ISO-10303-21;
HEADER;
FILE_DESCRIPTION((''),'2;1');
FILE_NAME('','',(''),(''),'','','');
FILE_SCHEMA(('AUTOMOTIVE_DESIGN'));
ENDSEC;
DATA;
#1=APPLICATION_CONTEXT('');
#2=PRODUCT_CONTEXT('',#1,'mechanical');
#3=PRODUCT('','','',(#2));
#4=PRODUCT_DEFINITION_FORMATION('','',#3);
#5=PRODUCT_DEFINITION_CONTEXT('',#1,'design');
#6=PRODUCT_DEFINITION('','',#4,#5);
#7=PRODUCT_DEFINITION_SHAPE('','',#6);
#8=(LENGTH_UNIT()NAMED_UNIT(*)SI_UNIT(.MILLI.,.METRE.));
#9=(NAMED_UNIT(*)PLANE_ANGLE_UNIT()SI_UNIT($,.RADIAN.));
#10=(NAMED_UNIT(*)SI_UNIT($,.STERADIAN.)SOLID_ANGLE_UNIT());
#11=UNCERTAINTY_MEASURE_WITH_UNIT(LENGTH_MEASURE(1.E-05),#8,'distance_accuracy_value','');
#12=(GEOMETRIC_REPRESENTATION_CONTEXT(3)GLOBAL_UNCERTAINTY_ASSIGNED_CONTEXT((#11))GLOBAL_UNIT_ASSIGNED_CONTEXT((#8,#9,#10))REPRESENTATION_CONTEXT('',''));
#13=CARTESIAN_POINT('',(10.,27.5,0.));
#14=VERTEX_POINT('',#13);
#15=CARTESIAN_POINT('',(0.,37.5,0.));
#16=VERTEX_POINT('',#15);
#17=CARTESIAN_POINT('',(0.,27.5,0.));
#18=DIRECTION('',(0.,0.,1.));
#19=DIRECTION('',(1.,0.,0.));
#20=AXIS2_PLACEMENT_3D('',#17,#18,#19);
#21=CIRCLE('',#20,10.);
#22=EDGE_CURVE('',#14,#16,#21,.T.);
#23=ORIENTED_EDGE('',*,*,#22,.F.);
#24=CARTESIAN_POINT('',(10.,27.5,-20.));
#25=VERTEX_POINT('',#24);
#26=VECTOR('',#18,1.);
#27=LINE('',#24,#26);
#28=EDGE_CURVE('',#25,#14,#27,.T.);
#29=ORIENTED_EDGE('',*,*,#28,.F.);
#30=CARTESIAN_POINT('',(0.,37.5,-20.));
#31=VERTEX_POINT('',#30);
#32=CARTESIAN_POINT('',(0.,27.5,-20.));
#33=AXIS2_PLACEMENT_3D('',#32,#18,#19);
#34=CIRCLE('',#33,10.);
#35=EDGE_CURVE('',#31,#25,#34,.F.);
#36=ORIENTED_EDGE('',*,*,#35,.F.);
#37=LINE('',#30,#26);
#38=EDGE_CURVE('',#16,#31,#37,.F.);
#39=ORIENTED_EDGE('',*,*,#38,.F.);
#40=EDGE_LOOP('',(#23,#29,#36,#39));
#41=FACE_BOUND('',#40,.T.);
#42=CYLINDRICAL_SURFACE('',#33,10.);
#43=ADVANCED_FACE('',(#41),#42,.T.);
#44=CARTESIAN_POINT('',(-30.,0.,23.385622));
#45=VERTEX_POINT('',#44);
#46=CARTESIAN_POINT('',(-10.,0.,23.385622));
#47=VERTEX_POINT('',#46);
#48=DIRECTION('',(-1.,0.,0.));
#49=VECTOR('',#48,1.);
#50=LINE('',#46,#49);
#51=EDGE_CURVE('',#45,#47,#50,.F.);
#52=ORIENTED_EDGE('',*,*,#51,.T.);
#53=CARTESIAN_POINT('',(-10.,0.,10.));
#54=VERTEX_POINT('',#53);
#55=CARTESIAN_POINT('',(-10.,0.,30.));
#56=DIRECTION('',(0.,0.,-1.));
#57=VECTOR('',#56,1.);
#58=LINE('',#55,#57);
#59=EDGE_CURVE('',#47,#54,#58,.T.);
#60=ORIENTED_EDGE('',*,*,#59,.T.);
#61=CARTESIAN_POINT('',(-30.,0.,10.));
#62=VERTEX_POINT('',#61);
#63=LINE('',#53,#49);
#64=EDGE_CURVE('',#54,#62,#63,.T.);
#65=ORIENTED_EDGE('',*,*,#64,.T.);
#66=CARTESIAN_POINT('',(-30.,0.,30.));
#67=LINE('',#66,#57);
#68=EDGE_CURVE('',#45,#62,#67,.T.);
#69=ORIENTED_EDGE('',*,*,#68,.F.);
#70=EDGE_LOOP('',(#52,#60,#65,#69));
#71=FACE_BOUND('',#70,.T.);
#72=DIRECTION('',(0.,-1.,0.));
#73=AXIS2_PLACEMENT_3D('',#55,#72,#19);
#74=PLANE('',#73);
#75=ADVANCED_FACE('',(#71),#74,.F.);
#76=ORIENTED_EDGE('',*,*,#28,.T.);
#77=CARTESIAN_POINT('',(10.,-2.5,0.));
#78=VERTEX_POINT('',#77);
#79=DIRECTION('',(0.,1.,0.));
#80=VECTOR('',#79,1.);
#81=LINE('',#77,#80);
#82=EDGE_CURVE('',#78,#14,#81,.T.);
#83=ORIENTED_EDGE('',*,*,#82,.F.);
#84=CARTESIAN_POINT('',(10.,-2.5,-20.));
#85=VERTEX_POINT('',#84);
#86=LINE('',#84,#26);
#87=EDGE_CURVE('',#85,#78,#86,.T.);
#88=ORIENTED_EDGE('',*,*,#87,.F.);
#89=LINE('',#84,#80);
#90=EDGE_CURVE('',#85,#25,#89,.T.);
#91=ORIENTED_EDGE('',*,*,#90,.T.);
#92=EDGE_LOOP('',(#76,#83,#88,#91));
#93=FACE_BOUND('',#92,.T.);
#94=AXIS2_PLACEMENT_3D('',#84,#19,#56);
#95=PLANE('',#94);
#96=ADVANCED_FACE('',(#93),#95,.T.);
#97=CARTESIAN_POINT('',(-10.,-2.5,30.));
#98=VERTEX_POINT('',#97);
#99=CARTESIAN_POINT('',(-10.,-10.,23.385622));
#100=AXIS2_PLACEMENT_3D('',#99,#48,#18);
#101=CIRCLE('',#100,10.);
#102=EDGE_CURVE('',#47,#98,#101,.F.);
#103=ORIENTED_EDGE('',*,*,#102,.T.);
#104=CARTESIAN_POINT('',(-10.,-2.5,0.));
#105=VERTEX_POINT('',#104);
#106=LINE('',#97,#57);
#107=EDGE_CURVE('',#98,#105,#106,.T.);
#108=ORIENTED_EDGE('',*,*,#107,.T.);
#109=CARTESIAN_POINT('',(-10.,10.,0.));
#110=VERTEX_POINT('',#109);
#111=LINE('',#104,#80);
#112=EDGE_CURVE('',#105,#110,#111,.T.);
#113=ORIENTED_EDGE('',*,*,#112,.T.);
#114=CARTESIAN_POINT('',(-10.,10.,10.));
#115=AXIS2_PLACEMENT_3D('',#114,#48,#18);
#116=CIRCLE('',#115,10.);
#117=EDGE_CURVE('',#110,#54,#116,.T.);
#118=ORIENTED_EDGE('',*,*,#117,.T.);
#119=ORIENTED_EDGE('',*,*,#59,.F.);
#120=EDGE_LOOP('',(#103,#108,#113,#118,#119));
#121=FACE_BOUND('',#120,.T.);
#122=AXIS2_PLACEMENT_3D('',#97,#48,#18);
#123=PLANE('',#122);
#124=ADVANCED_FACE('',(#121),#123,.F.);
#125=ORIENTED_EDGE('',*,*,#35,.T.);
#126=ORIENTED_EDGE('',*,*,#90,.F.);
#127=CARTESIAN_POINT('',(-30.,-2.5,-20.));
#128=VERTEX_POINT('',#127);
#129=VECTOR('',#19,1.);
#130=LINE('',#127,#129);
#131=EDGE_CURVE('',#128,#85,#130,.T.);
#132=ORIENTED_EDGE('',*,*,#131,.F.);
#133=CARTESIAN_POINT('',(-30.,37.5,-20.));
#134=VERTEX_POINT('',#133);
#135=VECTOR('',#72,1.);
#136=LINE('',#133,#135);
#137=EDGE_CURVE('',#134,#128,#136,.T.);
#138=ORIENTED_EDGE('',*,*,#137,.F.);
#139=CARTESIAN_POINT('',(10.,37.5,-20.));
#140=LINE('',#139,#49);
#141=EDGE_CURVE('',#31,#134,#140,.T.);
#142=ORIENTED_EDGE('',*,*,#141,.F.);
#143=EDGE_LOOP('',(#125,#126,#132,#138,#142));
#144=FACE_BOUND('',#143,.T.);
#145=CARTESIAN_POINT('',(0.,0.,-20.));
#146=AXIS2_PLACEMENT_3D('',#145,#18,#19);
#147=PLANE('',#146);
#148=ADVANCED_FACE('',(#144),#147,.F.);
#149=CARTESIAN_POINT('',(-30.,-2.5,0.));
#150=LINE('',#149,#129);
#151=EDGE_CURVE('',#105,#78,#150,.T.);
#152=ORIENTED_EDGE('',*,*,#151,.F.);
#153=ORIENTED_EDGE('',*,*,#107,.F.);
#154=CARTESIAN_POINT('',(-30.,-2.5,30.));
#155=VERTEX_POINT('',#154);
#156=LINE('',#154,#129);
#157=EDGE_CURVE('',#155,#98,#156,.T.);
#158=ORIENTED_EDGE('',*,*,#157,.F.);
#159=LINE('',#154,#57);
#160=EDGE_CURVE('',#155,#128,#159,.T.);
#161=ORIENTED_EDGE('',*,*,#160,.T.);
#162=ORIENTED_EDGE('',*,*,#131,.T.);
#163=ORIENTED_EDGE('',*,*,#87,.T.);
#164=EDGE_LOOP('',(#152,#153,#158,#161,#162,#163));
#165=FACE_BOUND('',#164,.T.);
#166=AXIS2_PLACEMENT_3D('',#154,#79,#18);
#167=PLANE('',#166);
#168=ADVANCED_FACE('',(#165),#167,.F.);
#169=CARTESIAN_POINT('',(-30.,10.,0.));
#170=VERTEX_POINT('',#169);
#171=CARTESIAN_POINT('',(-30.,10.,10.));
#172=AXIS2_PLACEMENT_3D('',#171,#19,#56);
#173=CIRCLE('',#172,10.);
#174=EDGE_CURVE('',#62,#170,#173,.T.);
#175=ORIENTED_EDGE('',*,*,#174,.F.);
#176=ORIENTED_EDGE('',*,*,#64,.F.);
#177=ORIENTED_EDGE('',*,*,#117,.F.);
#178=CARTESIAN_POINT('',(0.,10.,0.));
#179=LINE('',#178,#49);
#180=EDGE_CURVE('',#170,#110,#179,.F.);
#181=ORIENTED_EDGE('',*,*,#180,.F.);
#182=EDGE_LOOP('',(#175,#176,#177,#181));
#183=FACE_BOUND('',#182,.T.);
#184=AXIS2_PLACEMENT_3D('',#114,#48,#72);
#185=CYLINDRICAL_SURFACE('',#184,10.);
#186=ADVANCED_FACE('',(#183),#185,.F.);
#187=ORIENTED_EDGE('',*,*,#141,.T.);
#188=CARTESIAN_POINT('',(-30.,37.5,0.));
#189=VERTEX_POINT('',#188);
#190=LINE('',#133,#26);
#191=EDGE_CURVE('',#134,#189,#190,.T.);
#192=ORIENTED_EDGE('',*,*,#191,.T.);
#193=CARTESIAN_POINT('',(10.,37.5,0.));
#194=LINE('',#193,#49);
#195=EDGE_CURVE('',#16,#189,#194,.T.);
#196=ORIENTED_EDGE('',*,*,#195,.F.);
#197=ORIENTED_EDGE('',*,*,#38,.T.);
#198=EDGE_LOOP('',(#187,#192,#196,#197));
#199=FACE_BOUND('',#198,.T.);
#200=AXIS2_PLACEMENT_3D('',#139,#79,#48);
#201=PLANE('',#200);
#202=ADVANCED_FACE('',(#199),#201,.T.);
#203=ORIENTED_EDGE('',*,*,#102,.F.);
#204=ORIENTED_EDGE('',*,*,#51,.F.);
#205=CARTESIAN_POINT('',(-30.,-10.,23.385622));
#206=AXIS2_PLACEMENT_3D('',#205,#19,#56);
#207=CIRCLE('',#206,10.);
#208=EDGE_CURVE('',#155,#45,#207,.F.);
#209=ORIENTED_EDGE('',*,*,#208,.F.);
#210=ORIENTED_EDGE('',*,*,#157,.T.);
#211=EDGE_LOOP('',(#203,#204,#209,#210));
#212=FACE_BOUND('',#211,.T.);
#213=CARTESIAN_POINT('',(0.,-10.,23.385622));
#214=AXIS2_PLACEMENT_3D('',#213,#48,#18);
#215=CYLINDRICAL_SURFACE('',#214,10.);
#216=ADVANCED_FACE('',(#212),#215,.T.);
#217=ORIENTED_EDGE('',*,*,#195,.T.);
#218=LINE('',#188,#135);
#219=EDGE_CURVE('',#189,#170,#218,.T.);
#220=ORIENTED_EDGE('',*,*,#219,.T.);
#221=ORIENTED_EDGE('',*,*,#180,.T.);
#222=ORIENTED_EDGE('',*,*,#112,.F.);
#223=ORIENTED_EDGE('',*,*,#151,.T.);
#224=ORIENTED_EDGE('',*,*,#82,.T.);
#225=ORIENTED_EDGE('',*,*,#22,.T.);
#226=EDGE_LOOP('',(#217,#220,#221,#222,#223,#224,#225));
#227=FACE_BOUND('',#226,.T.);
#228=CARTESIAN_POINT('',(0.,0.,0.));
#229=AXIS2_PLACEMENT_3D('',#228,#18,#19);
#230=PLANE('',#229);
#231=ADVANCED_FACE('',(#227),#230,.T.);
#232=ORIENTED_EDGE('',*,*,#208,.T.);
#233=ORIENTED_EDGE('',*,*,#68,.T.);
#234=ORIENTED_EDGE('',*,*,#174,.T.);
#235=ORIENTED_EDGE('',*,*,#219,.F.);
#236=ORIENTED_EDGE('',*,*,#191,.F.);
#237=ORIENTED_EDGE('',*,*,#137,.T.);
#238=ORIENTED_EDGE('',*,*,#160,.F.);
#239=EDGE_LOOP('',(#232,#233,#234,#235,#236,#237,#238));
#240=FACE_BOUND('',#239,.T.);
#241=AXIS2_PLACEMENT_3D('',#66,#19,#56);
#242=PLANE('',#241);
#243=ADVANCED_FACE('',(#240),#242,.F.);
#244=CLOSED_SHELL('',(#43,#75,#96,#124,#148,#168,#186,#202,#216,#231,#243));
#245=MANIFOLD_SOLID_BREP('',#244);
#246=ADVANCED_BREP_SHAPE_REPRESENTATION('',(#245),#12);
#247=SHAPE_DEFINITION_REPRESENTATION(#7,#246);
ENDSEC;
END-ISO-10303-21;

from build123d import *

# Parameters (mm, degrees)
SKETCH1_W           = 20
SKETCH1_H           = 2.5
BOSS_EXTRUDE1_DEPTH = 30
SKETCH2_W           = 40
SKETCH2_H           = 40
BOSS_EXTRUDE2_DEPTH = 20
FILLET1_R           = 10


with BuildPart() as part:
    # Sketch1 → Boss-Extrude1 (new body)
    with BuildSketch(Plane.XY):
        with Locations((-20, -1.25)):
            Rectangle(SKETCH1_W, SKETCH1_H)
    extrude(amount=BOSS_EXTRUDE1_DEPTH)

    # Sketch2 → Boss-Extrude2 (add)
    with BuildSketch(Plane.XY):
        with Locations((-10, 17.5)):
            Rectangle(SKETCH2_W, SKETCH2_H)
    extrude(amount=-BOSS_EXTRUDE2_DEPTH)

    # Fillet1
    # the kernel refuses this fillet: 10 mm, written as the material it adds along each edge
    with BuildSketch(Plane(origin=(-10, 0, 0), x_dir=(0, 1, 0), z_dir=(-1, 0, 0))) as fillet1_piece_1:
        with BuildLine():
            CenterArc((FILLET1_R, -FILLET1_R), FILLET1_R, 90, 90)
            Line((0, -FILLET1_R), (0, 0))
            Line((0, 0), (FILLET1_R, 0))
        make_face()
    extrude(amount=20)
    # the kernel refuses this fillet: 10 mm, written as the material it takes off along each edge
    with BuildSketch(Plane(origin=(10, 37.5, 25), x_dir=(-1, 0, 0), z_dir=(0, 0, -1))) as fillet1_2_piece_1:
        with BuildLine():
            CenterArc((FILLET1_R, -FILLET1_R), FILLET1_R, 90, 90)
            Line((0, -FILLET1_R), (0, 0))
            Line((0, 0), (FILLET1_R, 0))
        make_face()
    extrude(amount=70, mode=Mode.SUBTRACT)
    with BuildSketch(Plane(origin=(6.535945694, 0, 30), x_dir=(0, 0, -1), z_dir=(-1, 0, 0))) as fillet1_2_piece_2:
        with BuildLine():
            CenterArc((6.614378278, 10), FILLET1_R, 228.590377891, 41.409622109)
            Line((0, 2.5), (0, 0))
            Line((0, 0), (6.614378278, 0))
        make_face()
    extrude(amount=53.071891388, mode=Mode.SUBTRACT)


solid = part.part
